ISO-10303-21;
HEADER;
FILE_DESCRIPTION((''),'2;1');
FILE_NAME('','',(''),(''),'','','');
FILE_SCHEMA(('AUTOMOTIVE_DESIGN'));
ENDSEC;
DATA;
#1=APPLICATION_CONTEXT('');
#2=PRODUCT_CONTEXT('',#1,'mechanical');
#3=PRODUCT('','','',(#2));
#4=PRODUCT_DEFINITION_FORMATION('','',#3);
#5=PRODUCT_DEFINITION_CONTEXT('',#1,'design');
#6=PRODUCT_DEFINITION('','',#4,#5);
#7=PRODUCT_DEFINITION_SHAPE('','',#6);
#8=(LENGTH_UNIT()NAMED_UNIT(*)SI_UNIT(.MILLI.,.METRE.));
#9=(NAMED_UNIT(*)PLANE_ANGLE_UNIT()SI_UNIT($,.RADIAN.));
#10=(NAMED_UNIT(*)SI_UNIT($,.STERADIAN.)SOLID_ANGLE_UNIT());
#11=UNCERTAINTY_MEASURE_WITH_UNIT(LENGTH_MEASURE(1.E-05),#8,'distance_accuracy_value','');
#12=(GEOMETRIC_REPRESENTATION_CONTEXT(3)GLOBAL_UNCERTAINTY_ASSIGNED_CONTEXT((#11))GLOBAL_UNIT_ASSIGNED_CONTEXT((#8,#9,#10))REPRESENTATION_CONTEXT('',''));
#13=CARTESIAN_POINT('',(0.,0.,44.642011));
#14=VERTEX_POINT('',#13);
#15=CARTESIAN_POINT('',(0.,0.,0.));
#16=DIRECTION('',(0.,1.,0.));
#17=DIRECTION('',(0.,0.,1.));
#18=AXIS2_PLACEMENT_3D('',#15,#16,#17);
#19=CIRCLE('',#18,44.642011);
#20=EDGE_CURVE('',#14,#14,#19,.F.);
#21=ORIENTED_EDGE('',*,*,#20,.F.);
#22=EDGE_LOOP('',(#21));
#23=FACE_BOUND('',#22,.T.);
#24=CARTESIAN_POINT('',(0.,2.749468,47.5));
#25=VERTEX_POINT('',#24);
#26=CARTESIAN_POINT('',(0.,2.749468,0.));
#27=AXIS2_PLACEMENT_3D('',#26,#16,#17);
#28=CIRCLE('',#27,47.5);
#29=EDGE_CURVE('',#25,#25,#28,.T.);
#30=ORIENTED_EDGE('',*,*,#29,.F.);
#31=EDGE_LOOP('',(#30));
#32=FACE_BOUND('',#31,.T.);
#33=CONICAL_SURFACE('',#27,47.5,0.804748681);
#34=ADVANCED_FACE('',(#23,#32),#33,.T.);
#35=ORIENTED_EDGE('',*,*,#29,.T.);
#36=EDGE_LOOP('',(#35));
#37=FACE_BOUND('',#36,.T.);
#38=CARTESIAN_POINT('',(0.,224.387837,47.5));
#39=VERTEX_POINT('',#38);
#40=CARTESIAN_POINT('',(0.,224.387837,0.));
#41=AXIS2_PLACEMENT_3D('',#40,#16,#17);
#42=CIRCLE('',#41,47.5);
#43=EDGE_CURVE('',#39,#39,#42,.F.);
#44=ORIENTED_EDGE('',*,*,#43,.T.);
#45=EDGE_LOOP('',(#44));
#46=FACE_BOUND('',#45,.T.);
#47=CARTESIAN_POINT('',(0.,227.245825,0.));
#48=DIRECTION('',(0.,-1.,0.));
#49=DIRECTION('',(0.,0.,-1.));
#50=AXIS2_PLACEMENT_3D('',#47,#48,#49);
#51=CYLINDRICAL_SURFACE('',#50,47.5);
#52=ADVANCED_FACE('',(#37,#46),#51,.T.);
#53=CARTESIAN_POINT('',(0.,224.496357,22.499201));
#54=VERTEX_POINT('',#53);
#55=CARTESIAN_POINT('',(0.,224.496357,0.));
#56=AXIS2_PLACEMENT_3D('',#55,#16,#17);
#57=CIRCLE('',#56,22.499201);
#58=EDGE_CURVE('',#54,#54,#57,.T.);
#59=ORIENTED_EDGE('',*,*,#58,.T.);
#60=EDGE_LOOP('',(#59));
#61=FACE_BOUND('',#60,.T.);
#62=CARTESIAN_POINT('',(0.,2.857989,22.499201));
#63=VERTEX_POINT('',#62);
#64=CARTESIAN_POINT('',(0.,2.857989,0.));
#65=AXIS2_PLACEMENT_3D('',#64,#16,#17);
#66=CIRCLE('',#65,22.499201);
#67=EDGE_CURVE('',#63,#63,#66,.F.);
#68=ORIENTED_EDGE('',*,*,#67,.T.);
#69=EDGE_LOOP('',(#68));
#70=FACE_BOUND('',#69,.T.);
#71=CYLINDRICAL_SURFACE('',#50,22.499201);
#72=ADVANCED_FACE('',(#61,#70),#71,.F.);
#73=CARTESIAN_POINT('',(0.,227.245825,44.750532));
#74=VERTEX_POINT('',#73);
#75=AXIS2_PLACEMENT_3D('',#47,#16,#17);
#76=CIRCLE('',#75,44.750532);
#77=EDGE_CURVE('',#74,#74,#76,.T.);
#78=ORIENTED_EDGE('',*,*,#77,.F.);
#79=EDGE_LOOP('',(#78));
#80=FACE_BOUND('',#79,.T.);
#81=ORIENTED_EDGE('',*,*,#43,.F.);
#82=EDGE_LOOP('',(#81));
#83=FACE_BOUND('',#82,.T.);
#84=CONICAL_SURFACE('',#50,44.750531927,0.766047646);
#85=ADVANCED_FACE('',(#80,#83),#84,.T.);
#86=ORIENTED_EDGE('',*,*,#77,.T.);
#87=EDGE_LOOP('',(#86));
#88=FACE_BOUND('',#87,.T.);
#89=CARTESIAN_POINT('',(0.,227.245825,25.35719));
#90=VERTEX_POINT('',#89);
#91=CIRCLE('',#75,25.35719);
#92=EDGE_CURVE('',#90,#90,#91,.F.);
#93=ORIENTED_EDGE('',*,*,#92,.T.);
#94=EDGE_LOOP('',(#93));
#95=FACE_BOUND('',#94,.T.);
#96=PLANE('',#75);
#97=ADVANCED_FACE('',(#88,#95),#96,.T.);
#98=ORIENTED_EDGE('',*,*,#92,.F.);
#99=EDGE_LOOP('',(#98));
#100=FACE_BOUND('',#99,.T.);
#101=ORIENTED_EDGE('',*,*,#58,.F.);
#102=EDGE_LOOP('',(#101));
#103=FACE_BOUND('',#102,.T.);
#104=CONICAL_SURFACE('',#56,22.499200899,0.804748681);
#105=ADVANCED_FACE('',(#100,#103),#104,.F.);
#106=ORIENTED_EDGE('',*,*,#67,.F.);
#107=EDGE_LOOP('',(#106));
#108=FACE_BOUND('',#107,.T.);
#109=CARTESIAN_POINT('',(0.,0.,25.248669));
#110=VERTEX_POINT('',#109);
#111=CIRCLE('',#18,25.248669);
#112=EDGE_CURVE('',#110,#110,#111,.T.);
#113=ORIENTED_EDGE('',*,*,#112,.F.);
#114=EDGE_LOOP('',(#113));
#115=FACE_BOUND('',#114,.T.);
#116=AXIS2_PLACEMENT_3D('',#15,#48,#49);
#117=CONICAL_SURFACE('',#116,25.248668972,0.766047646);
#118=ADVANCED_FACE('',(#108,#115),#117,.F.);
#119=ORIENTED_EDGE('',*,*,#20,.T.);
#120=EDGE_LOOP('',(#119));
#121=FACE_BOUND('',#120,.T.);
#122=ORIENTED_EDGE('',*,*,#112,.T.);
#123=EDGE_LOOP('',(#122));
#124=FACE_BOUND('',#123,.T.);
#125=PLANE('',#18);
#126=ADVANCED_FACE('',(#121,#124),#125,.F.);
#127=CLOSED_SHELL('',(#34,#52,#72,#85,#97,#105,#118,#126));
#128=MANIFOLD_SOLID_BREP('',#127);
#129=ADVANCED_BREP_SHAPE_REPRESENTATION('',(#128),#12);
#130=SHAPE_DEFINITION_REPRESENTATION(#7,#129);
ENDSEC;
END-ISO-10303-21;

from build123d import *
from OCP.BRepFilletAPI import BRepFilletAPI_MakeChamfer

# Parameters (mm, degrees)
SKETCH1_R           = 47.5
BOSS_EXTRUDE1_DEPTH = 227.245825442
SKETCH2_R           = 22.499200899
CUT_EXTRUDE1_DEPTH  = 237.966590853
CHAMFER1_SIZE       = 2.85798881
CHAMFER1_SIZE2      = 2.749468073


with BuildPart() as part:
    # Sketch1 → Boss-Extrude1 (new body)
    with BuildSketch(Plane(origin=(0, 0, 0), x_dir=(1, 0, 0), z_dir=(0, 1, 0))):
        Circle(SKETCH1_R)
    extrude(amount=BOSS_EXTRUDE1_DEPTH)

    # Sketch2 → Cut-Extrude1 (cut, through all)
    with BuildSketch(Plane(origin=(0, 0, 0), x_dir=(1, 0, 0), z_dir=(0, 1, 0))):
        Circle(SKETCH2_R)
    extrude(amount=CUT_EXTRUDE1_DEPTH, mode=Mode.SUBTRACT)

    # Chamfer1: one chamfer whose edges measure the first distance from different faces: ONE call of the kernel's chamfer builder (chamfer() names one face for all edges)
    chamfer1_edges_1 = [part.edges().sort_by_distance(p)[0] for p in [
        (-22.499200899, 227.245825442, 0),
    ]]
    chamfer1_side_1 = [part.faces().sort_by_distance(p)[0] for p in [
        (-46.156497116, 227.245825442, 0),
    ]]
    chamfer1_edges_2 = [part.edges().sort_by_distance(p)[0] for p in [
        (-22.499200899, 0, 0),
    ]]
    chamfer1_side_2 = [part.faces().sort_by_distance(p)[0] for p in [
        (-22.499200899, 113.622912721, 0),
    ]]
    chamfer1_edges_3 = [part.edges().sort_by_distance(p)[0] for p in [
        (-47.5, 0, 0),
    ]]
    chamfer1_side_3 = [part.faces().sort_by_distance(p)[0] for p in [
        (-46.156497116, 0, 0),
    ]]
    chamfer1_edges_4 = [part.edges().sort_by_distance(p)[0] for p in [
        (-47.5, 227.245825442, 0),
    ]]
    chamfer1_side_4 = [part.faces().sort_by_distance(p)[0] for p in [
        (-47.5, 113.622912721, 0),
    ]]
    chamfer1 = BRepFilletAPI_MakeChamfer(part.part.solid().wrapped)
    for e in chamfer1_edges_1:
        chamfer1.Add(CHAMFER1_SIZE, CHAMFER1_SIZE2, e.wrapped, chamfer1_side_1[0].wrapped)  # the first distance lies on this face
    for e in chamfer1_edges_2:
        chamfer1.Add(CHAMFER1_SIZE, CHAMFER1_SIZE2, e.wrapped, chamfer1_side_2[0].wrapped)  # the first distance lies on this face
    for e in chamfer1_edges_3:
        chamfer1.Add(CHAMFER1_SIZE, CHAMFER1_SIZE2, e.wrapped, chamfer1_side_3[0].wrapped)  # the first distance lies on this face
    for e in chamfer1_edges_4:
        chamfer1.Add(CHAMFER1_SIZE, CHAMFER1_SIZE2, e.wrapped, chamfer1_side_4[0].wrapped)  # the first distance lies on this face
    add(Compound.cast(chamfer1.Shape()), mode=Mode.REPLACE)


solid = part.part
